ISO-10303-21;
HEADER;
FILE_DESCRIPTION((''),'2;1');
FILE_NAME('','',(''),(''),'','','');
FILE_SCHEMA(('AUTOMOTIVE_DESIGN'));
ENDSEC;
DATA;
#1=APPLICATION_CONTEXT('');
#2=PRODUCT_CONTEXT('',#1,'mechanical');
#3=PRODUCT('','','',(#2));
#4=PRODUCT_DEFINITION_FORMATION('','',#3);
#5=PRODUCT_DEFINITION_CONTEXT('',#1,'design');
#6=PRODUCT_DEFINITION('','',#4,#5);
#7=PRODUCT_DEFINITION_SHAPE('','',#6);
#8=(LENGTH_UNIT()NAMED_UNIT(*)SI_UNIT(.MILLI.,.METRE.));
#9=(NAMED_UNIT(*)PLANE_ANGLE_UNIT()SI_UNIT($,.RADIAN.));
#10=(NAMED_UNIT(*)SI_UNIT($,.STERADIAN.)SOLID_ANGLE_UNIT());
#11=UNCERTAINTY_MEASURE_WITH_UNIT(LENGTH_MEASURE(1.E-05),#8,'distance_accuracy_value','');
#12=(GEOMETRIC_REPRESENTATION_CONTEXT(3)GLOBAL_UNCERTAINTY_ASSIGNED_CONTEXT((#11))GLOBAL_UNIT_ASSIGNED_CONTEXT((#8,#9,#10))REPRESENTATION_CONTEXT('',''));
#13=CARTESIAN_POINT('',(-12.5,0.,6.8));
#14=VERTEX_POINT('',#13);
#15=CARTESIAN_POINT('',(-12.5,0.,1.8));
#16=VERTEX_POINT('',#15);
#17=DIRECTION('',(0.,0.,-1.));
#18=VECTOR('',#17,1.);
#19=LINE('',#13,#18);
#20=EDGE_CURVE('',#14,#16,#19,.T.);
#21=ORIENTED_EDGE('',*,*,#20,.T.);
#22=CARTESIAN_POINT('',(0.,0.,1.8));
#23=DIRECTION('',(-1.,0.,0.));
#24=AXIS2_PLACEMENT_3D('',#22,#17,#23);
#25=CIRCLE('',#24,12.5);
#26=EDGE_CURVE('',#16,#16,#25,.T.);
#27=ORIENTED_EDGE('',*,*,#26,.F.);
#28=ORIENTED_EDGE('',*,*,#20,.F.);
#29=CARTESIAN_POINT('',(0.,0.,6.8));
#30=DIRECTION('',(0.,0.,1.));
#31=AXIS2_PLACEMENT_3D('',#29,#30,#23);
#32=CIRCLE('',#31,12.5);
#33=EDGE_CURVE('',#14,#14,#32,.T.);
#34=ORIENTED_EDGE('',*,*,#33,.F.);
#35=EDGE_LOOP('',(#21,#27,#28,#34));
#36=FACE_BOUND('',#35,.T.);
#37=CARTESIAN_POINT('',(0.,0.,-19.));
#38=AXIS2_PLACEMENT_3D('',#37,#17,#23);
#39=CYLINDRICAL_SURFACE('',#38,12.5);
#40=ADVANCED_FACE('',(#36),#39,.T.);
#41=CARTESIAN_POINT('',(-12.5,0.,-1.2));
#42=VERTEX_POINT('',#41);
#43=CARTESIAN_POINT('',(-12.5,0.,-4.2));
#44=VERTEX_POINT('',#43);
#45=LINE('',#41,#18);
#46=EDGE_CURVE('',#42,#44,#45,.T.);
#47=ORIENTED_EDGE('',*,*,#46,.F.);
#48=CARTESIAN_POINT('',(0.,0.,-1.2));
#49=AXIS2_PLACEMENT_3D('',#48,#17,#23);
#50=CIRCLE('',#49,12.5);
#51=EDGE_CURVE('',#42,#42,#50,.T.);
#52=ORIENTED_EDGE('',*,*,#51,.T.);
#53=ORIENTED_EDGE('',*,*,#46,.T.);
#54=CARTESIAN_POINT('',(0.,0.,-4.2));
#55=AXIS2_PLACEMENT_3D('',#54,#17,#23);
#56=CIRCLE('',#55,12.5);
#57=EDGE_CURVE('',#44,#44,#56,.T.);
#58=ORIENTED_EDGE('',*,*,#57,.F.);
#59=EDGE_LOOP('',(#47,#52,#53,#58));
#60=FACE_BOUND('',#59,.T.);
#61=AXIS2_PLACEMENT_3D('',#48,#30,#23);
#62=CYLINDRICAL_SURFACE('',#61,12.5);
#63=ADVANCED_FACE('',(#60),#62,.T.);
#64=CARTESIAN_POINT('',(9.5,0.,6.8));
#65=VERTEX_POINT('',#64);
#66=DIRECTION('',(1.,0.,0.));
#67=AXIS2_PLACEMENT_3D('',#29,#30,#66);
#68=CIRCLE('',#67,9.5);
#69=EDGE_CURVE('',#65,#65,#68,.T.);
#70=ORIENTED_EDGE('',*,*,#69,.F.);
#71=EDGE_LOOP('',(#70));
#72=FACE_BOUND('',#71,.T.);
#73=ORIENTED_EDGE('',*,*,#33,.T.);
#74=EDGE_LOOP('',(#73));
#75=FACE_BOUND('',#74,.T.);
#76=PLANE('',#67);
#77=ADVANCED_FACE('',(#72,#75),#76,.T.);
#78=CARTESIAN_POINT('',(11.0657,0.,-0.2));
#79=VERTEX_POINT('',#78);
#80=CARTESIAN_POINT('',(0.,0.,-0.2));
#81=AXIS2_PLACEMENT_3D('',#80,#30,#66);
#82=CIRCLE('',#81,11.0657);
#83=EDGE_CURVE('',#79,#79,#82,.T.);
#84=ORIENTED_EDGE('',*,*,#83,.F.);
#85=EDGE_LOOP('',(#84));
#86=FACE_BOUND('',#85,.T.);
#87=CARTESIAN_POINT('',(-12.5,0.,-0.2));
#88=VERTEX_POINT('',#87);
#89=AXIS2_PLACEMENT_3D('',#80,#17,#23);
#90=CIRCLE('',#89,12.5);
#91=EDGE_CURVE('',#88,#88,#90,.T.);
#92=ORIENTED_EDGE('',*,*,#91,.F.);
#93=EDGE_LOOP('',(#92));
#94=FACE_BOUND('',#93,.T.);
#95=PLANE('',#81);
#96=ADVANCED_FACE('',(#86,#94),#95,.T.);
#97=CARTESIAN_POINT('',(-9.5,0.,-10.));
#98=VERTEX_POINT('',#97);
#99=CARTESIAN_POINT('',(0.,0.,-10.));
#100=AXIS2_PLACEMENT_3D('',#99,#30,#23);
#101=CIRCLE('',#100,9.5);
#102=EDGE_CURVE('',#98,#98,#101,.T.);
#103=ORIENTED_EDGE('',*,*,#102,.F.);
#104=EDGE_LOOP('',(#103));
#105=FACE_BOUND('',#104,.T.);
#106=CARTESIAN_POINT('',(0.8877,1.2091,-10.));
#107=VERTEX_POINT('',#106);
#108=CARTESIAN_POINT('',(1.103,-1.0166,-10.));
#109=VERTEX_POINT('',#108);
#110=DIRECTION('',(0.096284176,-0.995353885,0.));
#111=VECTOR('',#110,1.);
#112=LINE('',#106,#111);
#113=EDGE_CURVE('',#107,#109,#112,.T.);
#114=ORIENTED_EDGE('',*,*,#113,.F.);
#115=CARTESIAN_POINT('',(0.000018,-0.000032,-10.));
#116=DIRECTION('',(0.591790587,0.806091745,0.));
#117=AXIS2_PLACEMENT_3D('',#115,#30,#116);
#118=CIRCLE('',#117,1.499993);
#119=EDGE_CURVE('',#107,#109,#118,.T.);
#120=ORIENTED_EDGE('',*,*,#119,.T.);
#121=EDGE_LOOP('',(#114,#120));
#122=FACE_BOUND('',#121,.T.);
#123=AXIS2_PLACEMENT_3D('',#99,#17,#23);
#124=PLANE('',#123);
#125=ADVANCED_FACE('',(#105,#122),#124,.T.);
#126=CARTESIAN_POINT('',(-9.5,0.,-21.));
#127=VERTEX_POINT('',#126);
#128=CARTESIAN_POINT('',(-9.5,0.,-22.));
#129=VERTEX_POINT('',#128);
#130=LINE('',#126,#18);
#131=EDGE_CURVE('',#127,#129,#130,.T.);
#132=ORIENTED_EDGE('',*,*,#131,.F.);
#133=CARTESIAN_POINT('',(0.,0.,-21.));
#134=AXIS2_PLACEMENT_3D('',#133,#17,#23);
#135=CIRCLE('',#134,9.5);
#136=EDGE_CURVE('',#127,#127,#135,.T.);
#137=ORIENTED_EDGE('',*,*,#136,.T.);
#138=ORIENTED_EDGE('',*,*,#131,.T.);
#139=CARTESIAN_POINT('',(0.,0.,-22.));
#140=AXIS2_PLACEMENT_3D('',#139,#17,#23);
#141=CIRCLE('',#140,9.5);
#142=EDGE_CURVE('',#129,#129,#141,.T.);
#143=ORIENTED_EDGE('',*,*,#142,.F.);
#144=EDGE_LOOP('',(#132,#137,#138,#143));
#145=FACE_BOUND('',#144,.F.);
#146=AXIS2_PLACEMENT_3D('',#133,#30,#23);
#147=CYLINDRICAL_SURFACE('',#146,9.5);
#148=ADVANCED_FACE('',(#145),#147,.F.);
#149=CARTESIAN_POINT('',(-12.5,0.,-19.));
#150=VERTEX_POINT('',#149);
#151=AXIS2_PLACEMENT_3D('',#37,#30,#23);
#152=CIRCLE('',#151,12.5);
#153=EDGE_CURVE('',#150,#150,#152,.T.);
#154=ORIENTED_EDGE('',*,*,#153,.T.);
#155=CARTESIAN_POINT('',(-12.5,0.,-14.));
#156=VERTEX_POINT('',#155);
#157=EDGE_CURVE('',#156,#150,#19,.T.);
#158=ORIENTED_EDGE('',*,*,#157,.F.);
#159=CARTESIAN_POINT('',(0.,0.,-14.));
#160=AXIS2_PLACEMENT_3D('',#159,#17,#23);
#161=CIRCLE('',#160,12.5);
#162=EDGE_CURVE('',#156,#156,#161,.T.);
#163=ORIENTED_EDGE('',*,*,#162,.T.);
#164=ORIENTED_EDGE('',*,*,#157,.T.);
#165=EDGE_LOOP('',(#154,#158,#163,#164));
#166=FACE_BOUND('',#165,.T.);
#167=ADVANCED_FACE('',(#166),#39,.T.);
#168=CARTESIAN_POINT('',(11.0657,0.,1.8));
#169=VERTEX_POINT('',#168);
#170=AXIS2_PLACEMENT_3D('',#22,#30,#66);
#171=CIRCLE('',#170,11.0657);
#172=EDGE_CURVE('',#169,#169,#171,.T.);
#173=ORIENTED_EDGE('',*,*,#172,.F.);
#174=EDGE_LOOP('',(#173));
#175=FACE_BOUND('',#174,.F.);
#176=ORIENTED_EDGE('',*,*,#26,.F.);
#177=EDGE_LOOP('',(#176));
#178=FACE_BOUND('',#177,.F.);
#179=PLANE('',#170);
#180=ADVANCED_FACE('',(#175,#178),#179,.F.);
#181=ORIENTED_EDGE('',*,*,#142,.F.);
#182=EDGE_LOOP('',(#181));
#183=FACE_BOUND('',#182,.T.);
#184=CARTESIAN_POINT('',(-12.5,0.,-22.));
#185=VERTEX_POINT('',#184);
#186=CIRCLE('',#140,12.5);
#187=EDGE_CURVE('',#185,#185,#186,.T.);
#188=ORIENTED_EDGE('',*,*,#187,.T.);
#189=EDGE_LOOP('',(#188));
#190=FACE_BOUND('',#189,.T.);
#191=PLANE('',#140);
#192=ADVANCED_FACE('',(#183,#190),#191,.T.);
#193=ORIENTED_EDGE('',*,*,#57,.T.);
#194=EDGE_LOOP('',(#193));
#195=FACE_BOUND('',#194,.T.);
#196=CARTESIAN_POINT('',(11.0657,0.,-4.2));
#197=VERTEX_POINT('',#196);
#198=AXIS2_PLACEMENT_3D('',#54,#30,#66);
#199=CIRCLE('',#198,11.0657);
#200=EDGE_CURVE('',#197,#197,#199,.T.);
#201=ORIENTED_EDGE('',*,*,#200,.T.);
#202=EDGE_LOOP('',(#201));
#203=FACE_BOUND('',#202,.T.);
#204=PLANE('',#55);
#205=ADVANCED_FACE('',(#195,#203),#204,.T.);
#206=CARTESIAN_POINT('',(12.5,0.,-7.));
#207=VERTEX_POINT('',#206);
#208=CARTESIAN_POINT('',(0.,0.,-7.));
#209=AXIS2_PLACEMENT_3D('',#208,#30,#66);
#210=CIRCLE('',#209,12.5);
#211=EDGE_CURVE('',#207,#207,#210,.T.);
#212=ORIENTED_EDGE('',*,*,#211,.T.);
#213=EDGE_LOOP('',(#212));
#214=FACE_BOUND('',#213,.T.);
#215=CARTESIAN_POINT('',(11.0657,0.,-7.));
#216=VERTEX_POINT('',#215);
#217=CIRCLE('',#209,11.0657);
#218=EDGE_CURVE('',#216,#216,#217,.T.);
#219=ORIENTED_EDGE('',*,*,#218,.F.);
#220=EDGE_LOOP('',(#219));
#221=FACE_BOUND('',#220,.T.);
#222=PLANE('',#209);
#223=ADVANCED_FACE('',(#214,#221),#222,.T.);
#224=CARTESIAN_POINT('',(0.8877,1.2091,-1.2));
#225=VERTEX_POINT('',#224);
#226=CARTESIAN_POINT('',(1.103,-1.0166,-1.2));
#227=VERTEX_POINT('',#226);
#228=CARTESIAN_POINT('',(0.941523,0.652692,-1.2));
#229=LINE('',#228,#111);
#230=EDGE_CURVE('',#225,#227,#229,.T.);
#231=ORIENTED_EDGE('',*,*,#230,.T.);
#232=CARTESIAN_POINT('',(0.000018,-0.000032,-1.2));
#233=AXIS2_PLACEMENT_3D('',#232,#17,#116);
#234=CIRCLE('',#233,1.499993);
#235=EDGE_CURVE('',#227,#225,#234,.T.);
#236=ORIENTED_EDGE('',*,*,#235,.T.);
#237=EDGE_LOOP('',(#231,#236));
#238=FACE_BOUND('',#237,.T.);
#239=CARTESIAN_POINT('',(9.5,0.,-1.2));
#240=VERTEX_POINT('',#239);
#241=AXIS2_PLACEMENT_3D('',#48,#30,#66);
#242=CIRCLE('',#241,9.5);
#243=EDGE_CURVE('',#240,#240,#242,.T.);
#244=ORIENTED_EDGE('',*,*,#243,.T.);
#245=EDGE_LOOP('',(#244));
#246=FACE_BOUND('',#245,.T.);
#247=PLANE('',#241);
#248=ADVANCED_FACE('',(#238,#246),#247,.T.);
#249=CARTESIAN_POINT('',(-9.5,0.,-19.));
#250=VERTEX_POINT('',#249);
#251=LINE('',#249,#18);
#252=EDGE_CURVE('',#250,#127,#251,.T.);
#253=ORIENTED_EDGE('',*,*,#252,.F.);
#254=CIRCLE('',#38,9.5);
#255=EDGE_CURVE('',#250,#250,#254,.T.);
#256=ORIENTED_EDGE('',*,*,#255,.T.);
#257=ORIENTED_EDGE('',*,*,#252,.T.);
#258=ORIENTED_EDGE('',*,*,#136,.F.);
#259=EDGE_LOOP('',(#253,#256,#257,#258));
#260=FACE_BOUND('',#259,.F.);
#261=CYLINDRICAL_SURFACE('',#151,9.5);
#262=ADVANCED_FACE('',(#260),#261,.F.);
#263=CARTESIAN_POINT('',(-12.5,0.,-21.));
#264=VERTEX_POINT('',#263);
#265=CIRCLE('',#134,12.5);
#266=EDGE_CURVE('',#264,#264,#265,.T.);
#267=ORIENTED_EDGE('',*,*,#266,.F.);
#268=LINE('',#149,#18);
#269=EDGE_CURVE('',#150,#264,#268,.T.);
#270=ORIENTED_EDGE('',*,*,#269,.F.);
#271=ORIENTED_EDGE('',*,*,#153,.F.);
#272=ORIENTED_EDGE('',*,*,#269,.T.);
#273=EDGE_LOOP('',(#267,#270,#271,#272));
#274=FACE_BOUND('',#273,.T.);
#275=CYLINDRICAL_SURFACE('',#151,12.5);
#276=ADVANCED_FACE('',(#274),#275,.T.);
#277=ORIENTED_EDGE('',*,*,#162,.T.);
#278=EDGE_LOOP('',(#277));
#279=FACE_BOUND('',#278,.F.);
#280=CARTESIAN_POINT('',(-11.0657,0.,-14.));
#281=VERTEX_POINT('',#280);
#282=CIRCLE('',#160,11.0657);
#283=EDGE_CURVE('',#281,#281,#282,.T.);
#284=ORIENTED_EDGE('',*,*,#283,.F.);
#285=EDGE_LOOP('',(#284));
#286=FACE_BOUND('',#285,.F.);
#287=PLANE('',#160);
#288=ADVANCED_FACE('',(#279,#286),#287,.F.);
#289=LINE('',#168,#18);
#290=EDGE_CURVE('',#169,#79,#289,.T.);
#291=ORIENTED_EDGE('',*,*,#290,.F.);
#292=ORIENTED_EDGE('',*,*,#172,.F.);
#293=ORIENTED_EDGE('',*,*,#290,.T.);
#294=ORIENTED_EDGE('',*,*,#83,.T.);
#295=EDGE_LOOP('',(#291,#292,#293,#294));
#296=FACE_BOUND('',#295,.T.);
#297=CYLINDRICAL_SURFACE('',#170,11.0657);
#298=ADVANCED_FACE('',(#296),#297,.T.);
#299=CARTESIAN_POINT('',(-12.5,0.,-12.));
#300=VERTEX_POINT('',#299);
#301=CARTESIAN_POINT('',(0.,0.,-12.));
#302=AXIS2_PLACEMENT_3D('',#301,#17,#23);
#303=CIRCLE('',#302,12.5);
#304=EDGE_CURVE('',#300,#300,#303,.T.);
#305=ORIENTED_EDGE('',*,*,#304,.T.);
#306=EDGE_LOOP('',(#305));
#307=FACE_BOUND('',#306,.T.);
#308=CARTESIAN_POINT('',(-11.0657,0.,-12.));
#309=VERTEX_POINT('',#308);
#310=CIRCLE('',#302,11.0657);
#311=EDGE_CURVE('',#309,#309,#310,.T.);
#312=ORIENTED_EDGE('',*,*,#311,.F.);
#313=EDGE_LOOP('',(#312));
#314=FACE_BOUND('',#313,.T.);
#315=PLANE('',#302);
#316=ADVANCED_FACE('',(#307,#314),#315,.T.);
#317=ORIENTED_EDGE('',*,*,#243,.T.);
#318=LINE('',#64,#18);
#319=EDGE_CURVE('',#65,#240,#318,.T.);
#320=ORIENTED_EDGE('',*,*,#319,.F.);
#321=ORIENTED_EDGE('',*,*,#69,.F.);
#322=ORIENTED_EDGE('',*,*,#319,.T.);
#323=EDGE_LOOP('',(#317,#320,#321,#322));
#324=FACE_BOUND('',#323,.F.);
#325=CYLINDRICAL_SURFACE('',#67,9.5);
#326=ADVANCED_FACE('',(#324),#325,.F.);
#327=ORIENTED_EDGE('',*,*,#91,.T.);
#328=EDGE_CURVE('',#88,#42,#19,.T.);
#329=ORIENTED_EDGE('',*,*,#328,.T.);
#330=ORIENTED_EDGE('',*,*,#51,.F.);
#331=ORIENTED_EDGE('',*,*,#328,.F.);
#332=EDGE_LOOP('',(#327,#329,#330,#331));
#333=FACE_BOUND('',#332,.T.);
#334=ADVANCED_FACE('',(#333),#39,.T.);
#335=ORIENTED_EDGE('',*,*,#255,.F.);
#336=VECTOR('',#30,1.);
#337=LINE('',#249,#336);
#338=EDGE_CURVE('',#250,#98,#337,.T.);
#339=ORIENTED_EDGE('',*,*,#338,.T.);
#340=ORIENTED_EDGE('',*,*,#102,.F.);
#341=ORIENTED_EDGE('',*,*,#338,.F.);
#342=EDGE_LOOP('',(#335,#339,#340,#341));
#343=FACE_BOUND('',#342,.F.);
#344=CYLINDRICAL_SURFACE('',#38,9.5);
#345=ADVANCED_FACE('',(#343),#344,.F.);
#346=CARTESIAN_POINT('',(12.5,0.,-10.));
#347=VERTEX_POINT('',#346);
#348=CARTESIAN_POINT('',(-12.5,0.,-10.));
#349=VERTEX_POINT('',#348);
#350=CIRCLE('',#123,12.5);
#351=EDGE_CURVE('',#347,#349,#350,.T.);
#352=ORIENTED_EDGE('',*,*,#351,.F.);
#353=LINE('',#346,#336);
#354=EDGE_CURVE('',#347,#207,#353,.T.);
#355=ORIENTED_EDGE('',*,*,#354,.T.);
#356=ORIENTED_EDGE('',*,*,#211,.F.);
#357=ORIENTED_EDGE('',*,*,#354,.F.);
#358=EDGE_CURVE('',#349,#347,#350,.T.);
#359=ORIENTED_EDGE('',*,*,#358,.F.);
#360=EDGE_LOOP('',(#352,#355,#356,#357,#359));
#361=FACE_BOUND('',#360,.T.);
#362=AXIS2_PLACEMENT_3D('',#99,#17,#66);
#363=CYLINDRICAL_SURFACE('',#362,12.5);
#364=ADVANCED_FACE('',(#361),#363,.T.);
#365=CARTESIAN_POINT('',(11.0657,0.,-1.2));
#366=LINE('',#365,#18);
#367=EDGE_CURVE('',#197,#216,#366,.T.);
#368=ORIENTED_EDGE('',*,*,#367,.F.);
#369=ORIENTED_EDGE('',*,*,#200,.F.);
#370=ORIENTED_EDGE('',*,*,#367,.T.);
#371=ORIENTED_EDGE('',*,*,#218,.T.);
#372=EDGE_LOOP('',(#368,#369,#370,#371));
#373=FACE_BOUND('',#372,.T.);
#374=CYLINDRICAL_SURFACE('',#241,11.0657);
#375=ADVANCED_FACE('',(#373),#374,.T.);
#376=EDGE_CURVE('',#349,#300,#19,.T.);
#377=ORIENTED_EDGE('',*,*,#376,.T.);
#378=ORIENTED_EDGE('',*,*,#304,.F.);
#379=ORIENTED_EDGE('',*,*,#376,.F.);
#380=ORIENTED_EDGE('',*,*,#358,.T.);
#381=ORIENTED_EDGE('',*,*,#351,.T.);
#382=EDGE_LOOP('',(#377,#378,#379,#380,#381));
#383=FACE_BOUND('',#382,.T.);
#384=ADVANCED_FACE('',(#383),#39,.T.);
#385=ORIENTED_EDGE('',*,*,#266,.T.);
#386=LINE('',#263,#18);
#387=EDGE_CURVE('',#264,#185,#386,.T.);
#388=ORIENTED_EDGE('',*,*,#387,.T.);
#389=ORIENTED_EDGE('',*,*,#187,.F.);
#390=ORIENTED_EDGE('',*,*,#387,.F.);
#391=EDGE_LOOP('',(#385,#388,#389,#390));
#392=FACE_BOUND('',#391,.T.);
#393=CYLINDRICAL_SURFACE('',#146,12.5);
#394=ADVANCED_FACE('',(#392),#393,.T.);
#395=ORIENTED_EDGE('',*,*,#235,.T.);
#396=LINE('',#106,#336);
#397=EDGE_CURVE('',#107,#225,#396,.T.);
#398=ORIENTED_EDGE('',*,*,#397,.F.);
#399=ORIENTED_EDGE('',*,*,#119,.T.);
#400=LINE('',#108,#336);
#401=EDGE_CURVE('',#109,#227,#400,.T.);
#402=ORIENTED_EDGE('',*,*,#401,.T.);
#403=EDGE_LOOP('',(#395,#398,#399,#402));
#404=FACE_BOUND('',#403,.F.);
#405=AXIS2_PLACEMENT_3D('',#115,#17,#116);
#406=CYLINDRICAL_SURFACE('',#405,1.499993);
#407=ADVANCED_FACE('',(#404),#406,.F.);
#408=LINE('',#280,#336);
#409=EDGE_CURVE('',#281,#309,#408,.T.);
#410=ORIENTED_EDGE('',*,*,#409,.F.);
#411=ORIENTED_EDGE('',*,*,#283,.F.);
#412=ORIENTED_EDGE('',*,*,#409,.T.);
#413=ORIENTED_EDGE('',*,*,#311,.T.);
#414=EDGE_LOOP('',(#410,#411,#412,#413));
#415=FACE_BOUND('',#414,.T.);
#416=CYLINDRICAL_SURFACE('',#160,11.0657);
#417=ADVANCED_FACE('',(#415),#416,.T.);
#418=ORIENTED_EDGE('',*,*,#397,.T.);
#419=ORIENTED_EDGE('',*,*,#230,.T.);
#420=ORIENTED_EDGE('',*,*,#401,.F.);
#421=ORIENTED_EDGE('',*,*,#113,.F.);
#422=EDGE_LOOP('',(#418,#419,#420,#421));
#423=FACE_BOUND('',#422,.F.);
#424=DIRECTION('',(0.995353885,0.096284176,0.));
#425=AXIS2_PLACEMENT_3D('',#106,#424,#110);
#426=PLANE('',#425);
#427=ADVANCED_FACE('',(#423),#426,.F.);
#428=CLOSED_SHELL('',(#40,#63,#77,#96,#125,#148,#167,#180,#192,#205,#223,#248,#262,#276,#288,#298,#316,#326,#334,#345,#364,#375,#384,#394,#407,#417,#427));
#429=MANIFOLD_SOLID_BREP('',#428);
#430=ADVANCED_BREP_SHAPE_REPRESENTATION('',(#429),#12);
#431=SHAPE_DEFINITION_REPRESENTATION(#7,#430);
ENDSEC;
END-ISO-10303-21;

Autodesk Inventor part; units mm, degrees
ref_plane "YZ Plane" through (0, 0, 0) normal (1, 0, 0) x (0, 1, 0)
sketch "Sketch1" plane through (0, 0, 0) normal (0, 0, 1) x (1, 0, 0)
  circle A0 centre (0, 0) radius 0.5 projected
  circle A1 centre (0, 0) radius 8.1639
  point P0 (0, 0)
extrude "Extrusion1" add sketch "Sketch1" along normal blind 9.8
ref_plane "Work Plane1" through (0, 0, -10) normal (0, 0, 1) x (1, 0, 0)
sketch "Sketch2" plane through (0, 0, -10) normal (0, 0, 1) x (1, 0, 0)
  line L0 (5, 5) -> (-5, 5) projected
  arc A0 (-5, 5) -> (-6, 4) centre (-5, 4) ccw projected
  line L1 (-6, 4) -> (-6, -4) projected
  arc A1 (-6, -4) -> (-5, -5) centre (-5, -4) ccw projected
  line L2 (-5, -5) -> (5, -5) projected
  arc A2 (5, -5) -> (6, -4) centre (5, -4) ccw projected
  line L3 (6, -4) -> (6, 4) projected
  arc A3 (6, 4) -> (5, 5) centre (5, 4) ccw projected
  circle A4 centre (3.5, 2.5) radius 1.75 projected
  circle A5 centre (-3.5, -2.5) radius 1.75 projected
  circle A6 centre (4.5, 0) radius 0.625 projected
  circle A7 centre (-4.5, 0) radius 0.625 projected
  circle A8 centre (0, 0) radius 2 projected
  line L4 (0, 0) -> (5.8769, -4.8974)
  line L5 (5.8769, -4.8974) -> (7.0292, -5.8577)
  circle A9 centre (0, 0) radius 9.15
  circle A10 centre (0, 0) radius 8.1639 projected
  circle A11 centre (0, 0) radius 13.1
  line L6 (3.0438, -10.097) -> (-9.0477, 9.4736)
  line L7 (-6.9043, 6.0044) -> (-9.0477, 9.4736)
  line L8 (3.0438, -10.097) -> (-5, 4)
  line L9 (-5, 4) -> (-4.2491, 2.684)
  point P0 (0, 0)
  dimension "d3" = 26.2
  dimension "d2" = 1.5
  dimension "d4" = 18.3
extrude "Extrusion2" add sketch "Sketch2" against normal blind 9 contours A9 L8 L6 | A11
sketch "Sketch3" plane through (0, 0, -10) normal (0, 0, 1) x (1, 0, 0)
  arc A0 (0.8877, 1.2091) -> (1.103, -1.0166) centre (0, 0) ccw projected
  line L0 (0.8877, 1.2091) -> (1.103, -1.0166) projected
  circle A1 centre (0, 0) radius 13.1 projected
  circle A2 centre (0, 0) radius 9.15 projected
  circle A3 centre (0, 0) radius 8.1639 projected
  circle A4 centre (0, 0) radius 0.5 projected
  point P0 (0, 0)
extrude "Extrusion3" add sketch "Sketch3" along normal up to surface (19.8 mm away) contours A1 | A2 | A3
sketch "Sketch4" plane through (0, 0, 9.8) normal (0, 0, 1) x (1, 0, 0)
  circle A0 centre (0, 0) radius 13.1 projected
  circle A1 centre (0, 0) radius 0.5 projected
  point P0 (0, 0)
extrude "Extrusion4" add sketch "Sketch4" against normal blind 10 contours A1
sketch "Sketch5" plane through (0, 0, 9.8) normal (0, 0, 1) x (1, 0, 0)
  circle A0 centre (0, 0) radius 13.1 projected
  point P0 (0, 0)
extrude "Extrusion5" add sketch "Sketch5" against normal up to surface (9.8 mm away)
sketch "Sketch6" plane through (0, 0, -0.2) normal (0, 0, -1) x (-1, 0, 0)
  circle A0 centre (0, 0) radius 0.5 projected
  point P0 (0, 0)
extrude "Extrusion6" cut sketch "Sketch6" against normal up to surface (0.2 mm away)
sketch "Sketch8" plane through (0, 0, 9.8) normal (0, 0, 1) x (1, 0, 0)
  circle A0 centre (0, 0) radius 13.1 projected
  point P0 (0, 0)
extrude "Extrusion7" cut sketch "Sketch8" against normal blind 3
sketch "Sketch10" plane through (0, 0, -19) normal (0, 0, -1) x (-1, 0, 0)
  circle A0 centre (0, 0) radius 13.1 projected
  circle A1 centre (0, 0) radius 9.15 projected
  circle A2 centre (0, 0) radius 12.5
  line L0 (-12.5, 0) -> (-9.15, 0)
  circle A3 centre (0, 0) radius 9.15 projected
  line L1 (-9.15, 0) -> (-10.825, 0)
  circle A4 centre (0, 0) radius 10.825
  point P0 (0, 0)
  dimension "d18" = 25
extrude "Extrusion8" cut sketch "Sketch10" against normal up to surface (9 mm away)
extrude "Extrusion9" cut sketch "Sketch10" against normal through all contours A0
sketch "Sketch11" plane through (0, 0, -19) normal (0, 0, -1) x (-1, 0, 0)
  circle A0 centre (0, 0) radius 10.825 projected
  line L0 (-0.8877, 1.2091) -> (-1.103, -1.0166) projected
  arc A1 (-1.103, -1.0166) -> (-0.8877, 1.2091) centre (0, 0) ccw projected
  circle A2 centre (0, 0) radius 10.825 projected
  circle A3 centre (0, 0) radius 12.5 projected
  line L1 (-12.5, 0) -> (-9.5, 0)
  circle A4 centre (0, 0) radius 9.5
  point P0 (0, 0)
  dimension "d23" = 3
extrude "Extrusion10" add sketch "Sketch11" against normal up to surface (9 mm away) contours A0
sketch "Sketch12" plane through (0, 0, 6.8) normal (0, 0, 1) x (1, 0, 0)
  circle A0 centre (0, 0) radius 12.5 projected
  circle A1 centre (0, 0) radius 9.5 projected
  line L0 (0.8877, 1.2091) -> (1.103, -1.0166) projected
  arc A2 (0.8877, 1.2091) -> (1.103, -1.0166) centre (0, 0) ccw projected
  point P0 (0, 0)
extrude "Extrusion11" cut sketch "Sketch12" against normal blind 8 contours A1 | L0 A2
sketch "Sketch13" plane through (0, 0, -1.2) normal (0, 0, 1) x (1, 0, 0)
  line L0 (1.103, -1.0166) -> (0.8877, 1.2091) projected
  arc A0 (0.8877, 1.2091) -> (1.103, -1.0166) centre (0, 0) ccw projected
  circle A1 centre (0, 0) radius 9.5 projected
  circle A2 centre (0, 0) radius 11.0657
  circle A3 centre (0, 0) radius 9.5 projected
  circle A4 centre (0, 0) radius 12.5 projected
  point P0 (0, 0)
extrude "Extrusion12" cut sketch "Sketch13" against normal up to surface (8.8 mm away) contours A4
sketch "Sketch14" plane through (0, 0, -10) normal (0, 0, 1) x (1, 0, 0)
  circle A0 centre (0, 0) radius 11.0657 projected
  circle A1 centre (0, 0) radius 12.5 projected
  point P0 (0, 0)
extrude "Extrusion13" add sketch "Sketch14" along normal blind 3
sketch "Sketch15" plane through (0, 0, -1.2) normal (0, 0, -1) x (-1, 0, 0)
  circle A0 centre (0, 0) radius 12.5 projected
  circle A1 centre (0, 0) radius 11.0657 projected
  point P0 (0, 0)
extrude "Extrusion14" add sketch "Sketch15" along normal blind 3
ref_plane "Work Plane2" through (0, 0, -14) normal (0, 0, -1) x (-1, 0, 0)
ref_plane "Work Plane3" through (0, 0, 1.8) normal (0, 0, 1) x (1, 0, 0)
sketch "Sketch16" plane through (0, 0, -14) normal (0, 0, -1) x (-1, 0, 0)
  circle A0 centre (0, 0) radius 12.5 projected
  circle A1 centre (0, 0) radius 11.0657 projected
  point P0 (0, 0)
extrude "Extrusion15" cut sketch "Sketch16" against normal blind 2
sketch "Sketch17" plane through (0, 0, 1.8) normal (0, 0, 1) x (1, 0, 0)
  circle A0 centre (0, 0) radius 12.5 projected
  circle A1 centre (0, 0) radius 11.0657 projected
  point P0 (0, 0)
extrude "Extrusion16" cut sketch "Sketch17" against normal blind 2
sketch "Sketch18" plane through (0, 0, -19) normal (0, 0, -1) x (-1, 0, 0)
  circle A0 centre (0, 0) radius 9.5 projected
  circle A1 centre (0, 0) radius 12.5 projected
  point P0 (0, 0)
extrude "Extrusion17" add sketch "Sketch18" along normal blind 2
sketch "Sketch19" plane through (0, 0, -21) normal (0, 0, -1) x (-1, 0, 0)
  circle A0 centre (0, 0) radius 12.5 projected
  circle A1 centre (0, 0) radius 9.5 projected
  point P0 (0, 0)
extrude "Extrusion18" add sketch "Sketch19" along normal blind 1
properties part number "felga" material "Aluminum 6061"
